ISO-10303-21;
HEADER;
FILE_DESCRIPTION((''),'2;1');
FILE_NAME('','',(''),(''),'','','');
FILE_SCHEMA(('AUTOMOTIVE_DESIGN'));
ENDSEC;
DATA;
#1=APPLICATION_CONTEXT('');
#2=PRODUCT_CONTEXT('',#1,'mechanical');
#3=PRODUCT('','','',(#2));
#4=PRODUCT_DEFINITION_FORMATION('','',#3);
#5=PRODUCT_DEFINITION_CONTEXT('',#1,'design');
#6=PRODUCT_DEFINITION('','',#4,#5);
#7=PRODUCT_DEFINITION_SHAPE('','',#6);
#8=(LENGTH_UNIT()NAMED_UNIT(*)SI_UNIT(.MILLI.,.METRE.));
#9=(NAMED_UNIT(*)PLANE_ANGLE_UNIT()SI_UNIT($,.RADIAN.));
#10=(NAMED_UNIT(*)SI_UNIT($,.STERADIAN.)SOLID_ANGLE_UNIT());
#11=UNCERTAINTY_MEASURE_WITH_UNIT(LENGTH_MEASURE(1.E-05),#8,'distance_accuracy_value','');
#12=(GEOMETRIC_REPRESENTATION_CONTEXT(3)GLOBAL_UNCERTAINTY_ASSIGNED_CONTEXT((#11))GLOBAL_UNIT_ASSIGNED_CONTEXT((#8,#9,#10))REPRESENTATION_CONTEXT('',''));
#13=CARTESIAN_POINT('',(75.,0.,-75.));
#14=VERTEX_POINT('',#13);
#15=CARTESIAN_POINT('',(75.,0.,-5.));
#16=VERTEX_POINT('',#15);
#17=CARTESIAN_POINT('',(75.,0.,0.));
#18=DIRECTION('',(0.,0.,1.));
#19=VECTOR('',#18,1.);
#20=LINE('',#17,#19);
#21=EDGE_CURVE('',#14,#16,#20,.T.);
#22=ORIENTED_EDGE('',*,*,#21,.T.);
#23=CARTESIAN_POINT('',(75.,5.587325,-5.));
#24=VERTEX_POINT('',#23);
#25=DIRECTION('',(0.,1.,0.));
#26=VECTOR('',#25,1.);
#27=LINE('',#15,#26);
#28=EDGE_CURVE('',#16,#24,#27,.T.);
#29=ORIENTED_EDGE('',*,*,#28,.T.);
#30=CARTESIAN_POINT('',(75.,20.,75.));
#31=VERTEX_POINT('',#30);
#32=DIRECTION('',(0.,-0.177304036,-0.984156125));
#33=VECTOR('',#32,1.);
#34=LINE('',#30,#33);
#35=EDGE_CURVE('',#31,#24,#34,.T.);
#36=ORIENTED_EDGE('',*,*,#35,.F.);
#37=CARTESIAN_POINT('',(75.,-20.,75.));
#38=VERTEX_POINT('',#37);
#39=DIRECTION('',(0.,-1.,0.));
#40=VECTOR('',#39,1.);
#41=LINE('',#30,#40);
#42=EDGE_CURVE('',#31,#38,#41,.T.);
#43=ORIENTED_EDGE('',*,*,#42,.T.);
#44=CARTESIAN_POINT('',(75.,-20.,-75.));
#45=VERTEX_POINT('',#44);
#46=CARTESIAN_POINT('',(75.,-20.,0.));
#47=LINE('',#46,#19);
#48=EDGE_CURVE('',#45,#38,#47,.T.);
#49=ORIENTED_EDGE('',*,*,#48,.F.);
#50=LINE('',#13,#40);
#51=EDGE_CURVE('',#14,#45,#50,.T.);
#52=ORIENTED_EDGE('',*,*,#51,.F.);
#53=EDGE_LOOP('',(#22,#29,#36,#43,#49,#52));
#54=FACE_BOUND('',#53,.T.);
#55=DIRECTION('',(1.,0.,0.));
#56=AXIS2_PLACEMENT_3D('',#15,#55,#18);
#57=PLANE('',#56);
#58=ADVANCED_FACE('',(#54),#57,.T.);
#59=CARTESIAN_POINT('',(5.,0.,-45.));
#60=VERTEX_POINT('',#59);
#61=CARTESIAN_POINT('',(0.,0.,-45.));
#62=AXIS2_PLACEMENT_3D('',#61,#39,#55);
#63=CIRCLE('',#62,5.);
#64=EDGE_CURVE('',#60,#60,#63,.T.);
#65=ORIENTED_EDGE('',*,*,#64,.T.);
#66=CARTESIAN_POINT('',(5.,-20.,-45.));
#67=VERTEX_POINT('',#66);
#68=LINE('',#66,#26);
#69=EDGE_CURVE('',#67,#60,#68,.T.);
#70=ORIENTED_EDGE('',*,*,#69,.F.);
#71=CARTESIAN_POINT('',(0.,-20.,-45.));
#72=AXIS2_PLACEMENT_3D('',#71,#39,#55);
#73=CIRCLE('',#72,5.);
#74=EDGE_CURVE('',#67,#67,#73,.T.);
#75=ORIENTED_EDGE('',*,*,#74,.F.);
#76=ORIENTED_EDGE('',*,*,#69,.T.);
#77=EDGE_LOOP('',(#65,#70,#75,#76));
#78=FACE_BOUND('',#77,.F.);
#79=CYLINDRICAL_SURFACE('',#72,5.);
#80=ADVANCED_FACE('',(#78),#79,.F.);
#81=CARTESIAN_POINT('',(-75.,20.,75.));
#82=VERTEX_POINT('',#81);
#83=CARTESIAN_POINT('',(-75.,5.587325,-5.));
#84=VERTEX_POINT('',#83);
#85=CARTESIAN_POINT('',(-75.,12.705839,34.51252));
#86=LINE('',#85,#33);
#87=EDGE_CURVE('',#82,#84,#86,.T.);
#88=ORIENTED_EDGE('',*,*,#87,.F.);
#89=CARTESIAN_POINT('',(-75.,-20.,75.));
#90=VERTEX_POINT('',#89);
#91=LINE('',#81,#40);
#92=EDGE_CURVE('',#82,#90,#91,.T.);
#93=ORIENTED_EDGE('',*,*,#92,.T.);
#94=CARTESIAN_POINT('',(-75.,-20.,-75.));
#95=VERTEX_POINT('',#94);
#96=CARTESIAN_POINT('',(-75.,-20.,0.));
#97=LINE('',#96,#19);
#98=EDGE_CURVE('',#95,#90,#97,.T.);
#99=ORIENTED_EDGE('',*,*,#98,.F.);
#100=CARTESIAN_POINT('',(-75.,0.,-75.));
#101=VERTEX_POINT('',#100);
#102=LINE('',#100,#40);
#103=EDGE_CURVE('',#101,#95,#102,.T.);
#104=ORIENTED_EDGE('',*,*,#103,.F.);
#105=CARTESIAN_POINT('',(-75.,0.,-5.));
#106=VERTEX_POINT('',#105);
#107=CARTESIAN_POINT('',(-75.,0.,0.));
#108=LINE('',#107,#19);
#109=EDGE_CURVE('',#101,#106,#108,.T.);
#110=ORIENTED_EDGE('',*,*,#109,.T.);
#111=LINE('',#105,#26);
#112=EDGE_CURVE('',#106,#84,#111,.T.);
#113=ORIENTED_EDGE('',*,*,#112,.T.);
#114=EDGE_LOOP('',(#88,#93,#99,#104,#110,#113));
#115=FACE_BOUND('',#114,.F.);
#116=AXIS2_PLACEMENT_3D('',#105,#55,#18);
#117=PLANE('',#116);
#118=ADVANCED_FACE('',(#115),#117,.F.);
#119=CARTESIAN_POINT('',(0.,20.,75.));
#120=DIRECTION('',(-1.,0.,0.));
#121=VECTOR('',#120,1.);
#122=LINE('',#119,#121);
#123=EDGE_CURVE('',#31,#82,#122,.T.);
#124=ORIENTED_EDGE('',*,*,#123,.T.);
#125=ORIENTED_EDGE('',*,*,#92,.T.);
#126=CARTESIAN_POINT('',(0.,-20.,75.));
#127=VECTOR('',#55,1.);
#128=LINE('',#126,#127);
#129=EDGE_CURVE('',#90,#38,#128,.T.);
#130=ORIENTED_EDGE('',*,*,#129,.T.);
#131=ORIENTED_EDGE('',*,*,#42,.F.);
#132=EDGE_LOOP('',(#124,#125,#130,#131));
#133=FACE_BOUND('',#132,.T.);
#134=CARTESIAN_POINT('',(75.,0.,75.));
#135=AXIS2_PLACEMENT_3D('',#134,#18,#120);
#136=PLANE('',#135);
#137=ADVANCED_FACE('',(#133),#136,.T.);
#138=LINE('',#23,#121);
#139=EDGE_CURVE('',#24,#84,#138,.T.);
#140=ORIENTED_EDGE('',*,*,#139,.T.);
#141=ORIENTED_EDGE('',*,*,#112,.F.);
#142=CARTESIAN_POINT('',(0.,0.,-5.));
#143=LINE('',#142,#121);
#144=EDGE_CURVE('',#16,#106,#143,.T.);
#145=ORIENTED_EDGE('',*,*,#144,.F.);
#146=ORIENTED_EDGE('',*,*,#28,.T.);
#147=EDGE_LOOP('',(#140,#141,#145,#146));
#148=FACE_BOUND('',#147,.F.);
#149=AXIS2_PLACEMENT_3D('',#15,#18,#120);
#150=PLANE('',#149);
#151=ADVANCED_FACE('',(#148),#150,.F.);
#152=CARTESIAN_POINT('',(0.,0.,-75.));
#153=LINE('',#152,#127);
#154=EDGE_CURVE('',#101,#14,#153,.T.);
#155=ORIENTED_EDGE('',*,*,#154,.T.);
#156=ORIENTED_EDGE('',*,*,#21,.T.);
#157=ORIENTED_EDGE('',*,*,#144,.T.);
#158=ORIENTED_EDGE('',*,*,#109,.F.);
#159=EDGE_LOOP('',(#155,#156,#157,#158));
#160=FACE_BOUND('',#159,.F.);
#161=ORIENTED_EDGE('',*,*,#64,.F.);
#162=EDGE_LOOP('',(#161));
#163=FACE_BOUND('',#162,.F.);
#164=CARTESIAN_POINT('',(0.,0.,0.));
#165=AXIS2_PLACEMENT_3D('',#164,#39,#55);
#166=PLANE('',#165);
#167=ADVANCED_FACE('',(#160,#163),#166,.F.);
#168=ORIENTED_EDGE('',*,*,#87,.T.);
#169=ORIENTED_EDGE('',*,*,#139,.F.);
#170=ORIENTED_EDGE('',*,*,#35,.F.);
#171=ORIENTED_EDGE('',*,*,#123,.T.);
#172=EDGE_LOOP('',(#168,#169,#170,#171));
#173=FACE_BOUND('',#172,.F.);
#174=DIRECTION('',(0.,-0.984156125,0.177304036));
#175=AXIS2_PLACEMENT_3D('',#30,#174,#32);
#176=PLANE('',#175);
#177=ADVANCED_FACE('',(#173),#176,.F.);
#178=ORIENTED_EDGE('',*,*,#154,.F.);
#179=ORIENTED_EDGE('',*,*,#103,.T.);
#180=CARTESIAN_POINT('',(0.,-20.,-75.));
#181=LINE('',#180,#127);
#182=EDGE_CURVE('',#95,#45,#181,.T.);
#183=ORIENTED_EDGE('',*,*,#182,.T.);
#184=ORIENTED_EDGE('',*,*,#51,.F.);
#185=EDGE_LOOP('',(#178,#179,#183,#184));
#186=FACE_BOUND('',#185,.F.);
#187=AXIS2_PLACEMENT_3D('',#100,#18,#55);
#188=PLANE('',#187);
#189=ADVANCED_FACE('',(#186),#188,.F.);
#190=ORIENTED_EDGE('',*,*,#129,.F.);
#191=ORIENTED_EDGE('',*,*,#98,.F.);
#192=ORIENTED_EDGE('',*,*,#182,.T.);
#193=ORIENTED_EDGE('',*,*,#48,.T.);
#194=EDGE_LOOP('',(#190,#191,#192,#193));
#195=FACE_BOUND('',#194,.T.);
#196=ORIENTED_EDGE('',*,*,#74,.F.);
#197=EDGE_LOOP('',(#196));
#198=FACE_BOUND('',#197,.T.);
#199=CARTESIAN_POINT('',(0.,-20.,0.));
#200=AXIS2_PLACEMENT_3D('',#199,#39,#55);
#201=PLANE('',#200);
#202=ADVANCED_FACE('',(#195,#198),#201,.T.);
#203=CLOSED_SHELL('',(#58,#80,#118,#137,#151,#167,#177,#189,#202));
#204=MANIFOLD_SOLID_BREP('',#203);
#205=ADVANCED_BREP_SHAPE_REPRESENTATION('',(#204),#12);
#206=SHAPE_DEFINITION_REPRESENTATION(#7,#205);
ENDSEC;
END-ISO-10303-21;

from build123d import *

# Parameters (mm, degrees)
F0_W     = 150
F0_H     = 150
F1_DEPTH = 20
F2_W     = 150
F2_H     = 80
F3_DEPTH = 20
F5_DEPTH = 150.001
F6_R     = 5
F7_DEPTH = 40.001


# Not quite as in the source:
# - a feature names something its author has since deleted; it is built from what else it names


with BuildPart() as f1:
    # F0 (on Front) → F1 (new body)
    with BuildSketch(Plane.XZ):
        Rectangle(F0_W, F0_H)
    extrude(amount=F1_DEPTH)

    # F2 (on face) → F3 (join)
    with BuildSketch(Plane(origin=(0, 0, 0), x_dir=(-1, 0, 0), z_dir=(0, 1, 0))):
        with Locations((0, 35)):
            Rectangle(F2_W, F2_H)
    extrude(amount=F3_DEPTH)

    # F4 (on face) → F5 (cut, through all)
    with BuildSketch(Plane.YZ.offset(75)):
        Polygon((20, -5), (20, 75), (5.5873245001, -5), align=None)
    extrude(amount=-F5_DEPTH, mode=Mode.SUBTRACT)

    # F6 (on face) → F7 (cut, through all)
    with BuildSketch(Plane.XZ.offset(20)):
        with Locations((0, -45)):
            Circle(F6_R)
    extrude(amount=-F7_DEPTH, mode=Mode.SUBTRACT)


solid = f1.part
